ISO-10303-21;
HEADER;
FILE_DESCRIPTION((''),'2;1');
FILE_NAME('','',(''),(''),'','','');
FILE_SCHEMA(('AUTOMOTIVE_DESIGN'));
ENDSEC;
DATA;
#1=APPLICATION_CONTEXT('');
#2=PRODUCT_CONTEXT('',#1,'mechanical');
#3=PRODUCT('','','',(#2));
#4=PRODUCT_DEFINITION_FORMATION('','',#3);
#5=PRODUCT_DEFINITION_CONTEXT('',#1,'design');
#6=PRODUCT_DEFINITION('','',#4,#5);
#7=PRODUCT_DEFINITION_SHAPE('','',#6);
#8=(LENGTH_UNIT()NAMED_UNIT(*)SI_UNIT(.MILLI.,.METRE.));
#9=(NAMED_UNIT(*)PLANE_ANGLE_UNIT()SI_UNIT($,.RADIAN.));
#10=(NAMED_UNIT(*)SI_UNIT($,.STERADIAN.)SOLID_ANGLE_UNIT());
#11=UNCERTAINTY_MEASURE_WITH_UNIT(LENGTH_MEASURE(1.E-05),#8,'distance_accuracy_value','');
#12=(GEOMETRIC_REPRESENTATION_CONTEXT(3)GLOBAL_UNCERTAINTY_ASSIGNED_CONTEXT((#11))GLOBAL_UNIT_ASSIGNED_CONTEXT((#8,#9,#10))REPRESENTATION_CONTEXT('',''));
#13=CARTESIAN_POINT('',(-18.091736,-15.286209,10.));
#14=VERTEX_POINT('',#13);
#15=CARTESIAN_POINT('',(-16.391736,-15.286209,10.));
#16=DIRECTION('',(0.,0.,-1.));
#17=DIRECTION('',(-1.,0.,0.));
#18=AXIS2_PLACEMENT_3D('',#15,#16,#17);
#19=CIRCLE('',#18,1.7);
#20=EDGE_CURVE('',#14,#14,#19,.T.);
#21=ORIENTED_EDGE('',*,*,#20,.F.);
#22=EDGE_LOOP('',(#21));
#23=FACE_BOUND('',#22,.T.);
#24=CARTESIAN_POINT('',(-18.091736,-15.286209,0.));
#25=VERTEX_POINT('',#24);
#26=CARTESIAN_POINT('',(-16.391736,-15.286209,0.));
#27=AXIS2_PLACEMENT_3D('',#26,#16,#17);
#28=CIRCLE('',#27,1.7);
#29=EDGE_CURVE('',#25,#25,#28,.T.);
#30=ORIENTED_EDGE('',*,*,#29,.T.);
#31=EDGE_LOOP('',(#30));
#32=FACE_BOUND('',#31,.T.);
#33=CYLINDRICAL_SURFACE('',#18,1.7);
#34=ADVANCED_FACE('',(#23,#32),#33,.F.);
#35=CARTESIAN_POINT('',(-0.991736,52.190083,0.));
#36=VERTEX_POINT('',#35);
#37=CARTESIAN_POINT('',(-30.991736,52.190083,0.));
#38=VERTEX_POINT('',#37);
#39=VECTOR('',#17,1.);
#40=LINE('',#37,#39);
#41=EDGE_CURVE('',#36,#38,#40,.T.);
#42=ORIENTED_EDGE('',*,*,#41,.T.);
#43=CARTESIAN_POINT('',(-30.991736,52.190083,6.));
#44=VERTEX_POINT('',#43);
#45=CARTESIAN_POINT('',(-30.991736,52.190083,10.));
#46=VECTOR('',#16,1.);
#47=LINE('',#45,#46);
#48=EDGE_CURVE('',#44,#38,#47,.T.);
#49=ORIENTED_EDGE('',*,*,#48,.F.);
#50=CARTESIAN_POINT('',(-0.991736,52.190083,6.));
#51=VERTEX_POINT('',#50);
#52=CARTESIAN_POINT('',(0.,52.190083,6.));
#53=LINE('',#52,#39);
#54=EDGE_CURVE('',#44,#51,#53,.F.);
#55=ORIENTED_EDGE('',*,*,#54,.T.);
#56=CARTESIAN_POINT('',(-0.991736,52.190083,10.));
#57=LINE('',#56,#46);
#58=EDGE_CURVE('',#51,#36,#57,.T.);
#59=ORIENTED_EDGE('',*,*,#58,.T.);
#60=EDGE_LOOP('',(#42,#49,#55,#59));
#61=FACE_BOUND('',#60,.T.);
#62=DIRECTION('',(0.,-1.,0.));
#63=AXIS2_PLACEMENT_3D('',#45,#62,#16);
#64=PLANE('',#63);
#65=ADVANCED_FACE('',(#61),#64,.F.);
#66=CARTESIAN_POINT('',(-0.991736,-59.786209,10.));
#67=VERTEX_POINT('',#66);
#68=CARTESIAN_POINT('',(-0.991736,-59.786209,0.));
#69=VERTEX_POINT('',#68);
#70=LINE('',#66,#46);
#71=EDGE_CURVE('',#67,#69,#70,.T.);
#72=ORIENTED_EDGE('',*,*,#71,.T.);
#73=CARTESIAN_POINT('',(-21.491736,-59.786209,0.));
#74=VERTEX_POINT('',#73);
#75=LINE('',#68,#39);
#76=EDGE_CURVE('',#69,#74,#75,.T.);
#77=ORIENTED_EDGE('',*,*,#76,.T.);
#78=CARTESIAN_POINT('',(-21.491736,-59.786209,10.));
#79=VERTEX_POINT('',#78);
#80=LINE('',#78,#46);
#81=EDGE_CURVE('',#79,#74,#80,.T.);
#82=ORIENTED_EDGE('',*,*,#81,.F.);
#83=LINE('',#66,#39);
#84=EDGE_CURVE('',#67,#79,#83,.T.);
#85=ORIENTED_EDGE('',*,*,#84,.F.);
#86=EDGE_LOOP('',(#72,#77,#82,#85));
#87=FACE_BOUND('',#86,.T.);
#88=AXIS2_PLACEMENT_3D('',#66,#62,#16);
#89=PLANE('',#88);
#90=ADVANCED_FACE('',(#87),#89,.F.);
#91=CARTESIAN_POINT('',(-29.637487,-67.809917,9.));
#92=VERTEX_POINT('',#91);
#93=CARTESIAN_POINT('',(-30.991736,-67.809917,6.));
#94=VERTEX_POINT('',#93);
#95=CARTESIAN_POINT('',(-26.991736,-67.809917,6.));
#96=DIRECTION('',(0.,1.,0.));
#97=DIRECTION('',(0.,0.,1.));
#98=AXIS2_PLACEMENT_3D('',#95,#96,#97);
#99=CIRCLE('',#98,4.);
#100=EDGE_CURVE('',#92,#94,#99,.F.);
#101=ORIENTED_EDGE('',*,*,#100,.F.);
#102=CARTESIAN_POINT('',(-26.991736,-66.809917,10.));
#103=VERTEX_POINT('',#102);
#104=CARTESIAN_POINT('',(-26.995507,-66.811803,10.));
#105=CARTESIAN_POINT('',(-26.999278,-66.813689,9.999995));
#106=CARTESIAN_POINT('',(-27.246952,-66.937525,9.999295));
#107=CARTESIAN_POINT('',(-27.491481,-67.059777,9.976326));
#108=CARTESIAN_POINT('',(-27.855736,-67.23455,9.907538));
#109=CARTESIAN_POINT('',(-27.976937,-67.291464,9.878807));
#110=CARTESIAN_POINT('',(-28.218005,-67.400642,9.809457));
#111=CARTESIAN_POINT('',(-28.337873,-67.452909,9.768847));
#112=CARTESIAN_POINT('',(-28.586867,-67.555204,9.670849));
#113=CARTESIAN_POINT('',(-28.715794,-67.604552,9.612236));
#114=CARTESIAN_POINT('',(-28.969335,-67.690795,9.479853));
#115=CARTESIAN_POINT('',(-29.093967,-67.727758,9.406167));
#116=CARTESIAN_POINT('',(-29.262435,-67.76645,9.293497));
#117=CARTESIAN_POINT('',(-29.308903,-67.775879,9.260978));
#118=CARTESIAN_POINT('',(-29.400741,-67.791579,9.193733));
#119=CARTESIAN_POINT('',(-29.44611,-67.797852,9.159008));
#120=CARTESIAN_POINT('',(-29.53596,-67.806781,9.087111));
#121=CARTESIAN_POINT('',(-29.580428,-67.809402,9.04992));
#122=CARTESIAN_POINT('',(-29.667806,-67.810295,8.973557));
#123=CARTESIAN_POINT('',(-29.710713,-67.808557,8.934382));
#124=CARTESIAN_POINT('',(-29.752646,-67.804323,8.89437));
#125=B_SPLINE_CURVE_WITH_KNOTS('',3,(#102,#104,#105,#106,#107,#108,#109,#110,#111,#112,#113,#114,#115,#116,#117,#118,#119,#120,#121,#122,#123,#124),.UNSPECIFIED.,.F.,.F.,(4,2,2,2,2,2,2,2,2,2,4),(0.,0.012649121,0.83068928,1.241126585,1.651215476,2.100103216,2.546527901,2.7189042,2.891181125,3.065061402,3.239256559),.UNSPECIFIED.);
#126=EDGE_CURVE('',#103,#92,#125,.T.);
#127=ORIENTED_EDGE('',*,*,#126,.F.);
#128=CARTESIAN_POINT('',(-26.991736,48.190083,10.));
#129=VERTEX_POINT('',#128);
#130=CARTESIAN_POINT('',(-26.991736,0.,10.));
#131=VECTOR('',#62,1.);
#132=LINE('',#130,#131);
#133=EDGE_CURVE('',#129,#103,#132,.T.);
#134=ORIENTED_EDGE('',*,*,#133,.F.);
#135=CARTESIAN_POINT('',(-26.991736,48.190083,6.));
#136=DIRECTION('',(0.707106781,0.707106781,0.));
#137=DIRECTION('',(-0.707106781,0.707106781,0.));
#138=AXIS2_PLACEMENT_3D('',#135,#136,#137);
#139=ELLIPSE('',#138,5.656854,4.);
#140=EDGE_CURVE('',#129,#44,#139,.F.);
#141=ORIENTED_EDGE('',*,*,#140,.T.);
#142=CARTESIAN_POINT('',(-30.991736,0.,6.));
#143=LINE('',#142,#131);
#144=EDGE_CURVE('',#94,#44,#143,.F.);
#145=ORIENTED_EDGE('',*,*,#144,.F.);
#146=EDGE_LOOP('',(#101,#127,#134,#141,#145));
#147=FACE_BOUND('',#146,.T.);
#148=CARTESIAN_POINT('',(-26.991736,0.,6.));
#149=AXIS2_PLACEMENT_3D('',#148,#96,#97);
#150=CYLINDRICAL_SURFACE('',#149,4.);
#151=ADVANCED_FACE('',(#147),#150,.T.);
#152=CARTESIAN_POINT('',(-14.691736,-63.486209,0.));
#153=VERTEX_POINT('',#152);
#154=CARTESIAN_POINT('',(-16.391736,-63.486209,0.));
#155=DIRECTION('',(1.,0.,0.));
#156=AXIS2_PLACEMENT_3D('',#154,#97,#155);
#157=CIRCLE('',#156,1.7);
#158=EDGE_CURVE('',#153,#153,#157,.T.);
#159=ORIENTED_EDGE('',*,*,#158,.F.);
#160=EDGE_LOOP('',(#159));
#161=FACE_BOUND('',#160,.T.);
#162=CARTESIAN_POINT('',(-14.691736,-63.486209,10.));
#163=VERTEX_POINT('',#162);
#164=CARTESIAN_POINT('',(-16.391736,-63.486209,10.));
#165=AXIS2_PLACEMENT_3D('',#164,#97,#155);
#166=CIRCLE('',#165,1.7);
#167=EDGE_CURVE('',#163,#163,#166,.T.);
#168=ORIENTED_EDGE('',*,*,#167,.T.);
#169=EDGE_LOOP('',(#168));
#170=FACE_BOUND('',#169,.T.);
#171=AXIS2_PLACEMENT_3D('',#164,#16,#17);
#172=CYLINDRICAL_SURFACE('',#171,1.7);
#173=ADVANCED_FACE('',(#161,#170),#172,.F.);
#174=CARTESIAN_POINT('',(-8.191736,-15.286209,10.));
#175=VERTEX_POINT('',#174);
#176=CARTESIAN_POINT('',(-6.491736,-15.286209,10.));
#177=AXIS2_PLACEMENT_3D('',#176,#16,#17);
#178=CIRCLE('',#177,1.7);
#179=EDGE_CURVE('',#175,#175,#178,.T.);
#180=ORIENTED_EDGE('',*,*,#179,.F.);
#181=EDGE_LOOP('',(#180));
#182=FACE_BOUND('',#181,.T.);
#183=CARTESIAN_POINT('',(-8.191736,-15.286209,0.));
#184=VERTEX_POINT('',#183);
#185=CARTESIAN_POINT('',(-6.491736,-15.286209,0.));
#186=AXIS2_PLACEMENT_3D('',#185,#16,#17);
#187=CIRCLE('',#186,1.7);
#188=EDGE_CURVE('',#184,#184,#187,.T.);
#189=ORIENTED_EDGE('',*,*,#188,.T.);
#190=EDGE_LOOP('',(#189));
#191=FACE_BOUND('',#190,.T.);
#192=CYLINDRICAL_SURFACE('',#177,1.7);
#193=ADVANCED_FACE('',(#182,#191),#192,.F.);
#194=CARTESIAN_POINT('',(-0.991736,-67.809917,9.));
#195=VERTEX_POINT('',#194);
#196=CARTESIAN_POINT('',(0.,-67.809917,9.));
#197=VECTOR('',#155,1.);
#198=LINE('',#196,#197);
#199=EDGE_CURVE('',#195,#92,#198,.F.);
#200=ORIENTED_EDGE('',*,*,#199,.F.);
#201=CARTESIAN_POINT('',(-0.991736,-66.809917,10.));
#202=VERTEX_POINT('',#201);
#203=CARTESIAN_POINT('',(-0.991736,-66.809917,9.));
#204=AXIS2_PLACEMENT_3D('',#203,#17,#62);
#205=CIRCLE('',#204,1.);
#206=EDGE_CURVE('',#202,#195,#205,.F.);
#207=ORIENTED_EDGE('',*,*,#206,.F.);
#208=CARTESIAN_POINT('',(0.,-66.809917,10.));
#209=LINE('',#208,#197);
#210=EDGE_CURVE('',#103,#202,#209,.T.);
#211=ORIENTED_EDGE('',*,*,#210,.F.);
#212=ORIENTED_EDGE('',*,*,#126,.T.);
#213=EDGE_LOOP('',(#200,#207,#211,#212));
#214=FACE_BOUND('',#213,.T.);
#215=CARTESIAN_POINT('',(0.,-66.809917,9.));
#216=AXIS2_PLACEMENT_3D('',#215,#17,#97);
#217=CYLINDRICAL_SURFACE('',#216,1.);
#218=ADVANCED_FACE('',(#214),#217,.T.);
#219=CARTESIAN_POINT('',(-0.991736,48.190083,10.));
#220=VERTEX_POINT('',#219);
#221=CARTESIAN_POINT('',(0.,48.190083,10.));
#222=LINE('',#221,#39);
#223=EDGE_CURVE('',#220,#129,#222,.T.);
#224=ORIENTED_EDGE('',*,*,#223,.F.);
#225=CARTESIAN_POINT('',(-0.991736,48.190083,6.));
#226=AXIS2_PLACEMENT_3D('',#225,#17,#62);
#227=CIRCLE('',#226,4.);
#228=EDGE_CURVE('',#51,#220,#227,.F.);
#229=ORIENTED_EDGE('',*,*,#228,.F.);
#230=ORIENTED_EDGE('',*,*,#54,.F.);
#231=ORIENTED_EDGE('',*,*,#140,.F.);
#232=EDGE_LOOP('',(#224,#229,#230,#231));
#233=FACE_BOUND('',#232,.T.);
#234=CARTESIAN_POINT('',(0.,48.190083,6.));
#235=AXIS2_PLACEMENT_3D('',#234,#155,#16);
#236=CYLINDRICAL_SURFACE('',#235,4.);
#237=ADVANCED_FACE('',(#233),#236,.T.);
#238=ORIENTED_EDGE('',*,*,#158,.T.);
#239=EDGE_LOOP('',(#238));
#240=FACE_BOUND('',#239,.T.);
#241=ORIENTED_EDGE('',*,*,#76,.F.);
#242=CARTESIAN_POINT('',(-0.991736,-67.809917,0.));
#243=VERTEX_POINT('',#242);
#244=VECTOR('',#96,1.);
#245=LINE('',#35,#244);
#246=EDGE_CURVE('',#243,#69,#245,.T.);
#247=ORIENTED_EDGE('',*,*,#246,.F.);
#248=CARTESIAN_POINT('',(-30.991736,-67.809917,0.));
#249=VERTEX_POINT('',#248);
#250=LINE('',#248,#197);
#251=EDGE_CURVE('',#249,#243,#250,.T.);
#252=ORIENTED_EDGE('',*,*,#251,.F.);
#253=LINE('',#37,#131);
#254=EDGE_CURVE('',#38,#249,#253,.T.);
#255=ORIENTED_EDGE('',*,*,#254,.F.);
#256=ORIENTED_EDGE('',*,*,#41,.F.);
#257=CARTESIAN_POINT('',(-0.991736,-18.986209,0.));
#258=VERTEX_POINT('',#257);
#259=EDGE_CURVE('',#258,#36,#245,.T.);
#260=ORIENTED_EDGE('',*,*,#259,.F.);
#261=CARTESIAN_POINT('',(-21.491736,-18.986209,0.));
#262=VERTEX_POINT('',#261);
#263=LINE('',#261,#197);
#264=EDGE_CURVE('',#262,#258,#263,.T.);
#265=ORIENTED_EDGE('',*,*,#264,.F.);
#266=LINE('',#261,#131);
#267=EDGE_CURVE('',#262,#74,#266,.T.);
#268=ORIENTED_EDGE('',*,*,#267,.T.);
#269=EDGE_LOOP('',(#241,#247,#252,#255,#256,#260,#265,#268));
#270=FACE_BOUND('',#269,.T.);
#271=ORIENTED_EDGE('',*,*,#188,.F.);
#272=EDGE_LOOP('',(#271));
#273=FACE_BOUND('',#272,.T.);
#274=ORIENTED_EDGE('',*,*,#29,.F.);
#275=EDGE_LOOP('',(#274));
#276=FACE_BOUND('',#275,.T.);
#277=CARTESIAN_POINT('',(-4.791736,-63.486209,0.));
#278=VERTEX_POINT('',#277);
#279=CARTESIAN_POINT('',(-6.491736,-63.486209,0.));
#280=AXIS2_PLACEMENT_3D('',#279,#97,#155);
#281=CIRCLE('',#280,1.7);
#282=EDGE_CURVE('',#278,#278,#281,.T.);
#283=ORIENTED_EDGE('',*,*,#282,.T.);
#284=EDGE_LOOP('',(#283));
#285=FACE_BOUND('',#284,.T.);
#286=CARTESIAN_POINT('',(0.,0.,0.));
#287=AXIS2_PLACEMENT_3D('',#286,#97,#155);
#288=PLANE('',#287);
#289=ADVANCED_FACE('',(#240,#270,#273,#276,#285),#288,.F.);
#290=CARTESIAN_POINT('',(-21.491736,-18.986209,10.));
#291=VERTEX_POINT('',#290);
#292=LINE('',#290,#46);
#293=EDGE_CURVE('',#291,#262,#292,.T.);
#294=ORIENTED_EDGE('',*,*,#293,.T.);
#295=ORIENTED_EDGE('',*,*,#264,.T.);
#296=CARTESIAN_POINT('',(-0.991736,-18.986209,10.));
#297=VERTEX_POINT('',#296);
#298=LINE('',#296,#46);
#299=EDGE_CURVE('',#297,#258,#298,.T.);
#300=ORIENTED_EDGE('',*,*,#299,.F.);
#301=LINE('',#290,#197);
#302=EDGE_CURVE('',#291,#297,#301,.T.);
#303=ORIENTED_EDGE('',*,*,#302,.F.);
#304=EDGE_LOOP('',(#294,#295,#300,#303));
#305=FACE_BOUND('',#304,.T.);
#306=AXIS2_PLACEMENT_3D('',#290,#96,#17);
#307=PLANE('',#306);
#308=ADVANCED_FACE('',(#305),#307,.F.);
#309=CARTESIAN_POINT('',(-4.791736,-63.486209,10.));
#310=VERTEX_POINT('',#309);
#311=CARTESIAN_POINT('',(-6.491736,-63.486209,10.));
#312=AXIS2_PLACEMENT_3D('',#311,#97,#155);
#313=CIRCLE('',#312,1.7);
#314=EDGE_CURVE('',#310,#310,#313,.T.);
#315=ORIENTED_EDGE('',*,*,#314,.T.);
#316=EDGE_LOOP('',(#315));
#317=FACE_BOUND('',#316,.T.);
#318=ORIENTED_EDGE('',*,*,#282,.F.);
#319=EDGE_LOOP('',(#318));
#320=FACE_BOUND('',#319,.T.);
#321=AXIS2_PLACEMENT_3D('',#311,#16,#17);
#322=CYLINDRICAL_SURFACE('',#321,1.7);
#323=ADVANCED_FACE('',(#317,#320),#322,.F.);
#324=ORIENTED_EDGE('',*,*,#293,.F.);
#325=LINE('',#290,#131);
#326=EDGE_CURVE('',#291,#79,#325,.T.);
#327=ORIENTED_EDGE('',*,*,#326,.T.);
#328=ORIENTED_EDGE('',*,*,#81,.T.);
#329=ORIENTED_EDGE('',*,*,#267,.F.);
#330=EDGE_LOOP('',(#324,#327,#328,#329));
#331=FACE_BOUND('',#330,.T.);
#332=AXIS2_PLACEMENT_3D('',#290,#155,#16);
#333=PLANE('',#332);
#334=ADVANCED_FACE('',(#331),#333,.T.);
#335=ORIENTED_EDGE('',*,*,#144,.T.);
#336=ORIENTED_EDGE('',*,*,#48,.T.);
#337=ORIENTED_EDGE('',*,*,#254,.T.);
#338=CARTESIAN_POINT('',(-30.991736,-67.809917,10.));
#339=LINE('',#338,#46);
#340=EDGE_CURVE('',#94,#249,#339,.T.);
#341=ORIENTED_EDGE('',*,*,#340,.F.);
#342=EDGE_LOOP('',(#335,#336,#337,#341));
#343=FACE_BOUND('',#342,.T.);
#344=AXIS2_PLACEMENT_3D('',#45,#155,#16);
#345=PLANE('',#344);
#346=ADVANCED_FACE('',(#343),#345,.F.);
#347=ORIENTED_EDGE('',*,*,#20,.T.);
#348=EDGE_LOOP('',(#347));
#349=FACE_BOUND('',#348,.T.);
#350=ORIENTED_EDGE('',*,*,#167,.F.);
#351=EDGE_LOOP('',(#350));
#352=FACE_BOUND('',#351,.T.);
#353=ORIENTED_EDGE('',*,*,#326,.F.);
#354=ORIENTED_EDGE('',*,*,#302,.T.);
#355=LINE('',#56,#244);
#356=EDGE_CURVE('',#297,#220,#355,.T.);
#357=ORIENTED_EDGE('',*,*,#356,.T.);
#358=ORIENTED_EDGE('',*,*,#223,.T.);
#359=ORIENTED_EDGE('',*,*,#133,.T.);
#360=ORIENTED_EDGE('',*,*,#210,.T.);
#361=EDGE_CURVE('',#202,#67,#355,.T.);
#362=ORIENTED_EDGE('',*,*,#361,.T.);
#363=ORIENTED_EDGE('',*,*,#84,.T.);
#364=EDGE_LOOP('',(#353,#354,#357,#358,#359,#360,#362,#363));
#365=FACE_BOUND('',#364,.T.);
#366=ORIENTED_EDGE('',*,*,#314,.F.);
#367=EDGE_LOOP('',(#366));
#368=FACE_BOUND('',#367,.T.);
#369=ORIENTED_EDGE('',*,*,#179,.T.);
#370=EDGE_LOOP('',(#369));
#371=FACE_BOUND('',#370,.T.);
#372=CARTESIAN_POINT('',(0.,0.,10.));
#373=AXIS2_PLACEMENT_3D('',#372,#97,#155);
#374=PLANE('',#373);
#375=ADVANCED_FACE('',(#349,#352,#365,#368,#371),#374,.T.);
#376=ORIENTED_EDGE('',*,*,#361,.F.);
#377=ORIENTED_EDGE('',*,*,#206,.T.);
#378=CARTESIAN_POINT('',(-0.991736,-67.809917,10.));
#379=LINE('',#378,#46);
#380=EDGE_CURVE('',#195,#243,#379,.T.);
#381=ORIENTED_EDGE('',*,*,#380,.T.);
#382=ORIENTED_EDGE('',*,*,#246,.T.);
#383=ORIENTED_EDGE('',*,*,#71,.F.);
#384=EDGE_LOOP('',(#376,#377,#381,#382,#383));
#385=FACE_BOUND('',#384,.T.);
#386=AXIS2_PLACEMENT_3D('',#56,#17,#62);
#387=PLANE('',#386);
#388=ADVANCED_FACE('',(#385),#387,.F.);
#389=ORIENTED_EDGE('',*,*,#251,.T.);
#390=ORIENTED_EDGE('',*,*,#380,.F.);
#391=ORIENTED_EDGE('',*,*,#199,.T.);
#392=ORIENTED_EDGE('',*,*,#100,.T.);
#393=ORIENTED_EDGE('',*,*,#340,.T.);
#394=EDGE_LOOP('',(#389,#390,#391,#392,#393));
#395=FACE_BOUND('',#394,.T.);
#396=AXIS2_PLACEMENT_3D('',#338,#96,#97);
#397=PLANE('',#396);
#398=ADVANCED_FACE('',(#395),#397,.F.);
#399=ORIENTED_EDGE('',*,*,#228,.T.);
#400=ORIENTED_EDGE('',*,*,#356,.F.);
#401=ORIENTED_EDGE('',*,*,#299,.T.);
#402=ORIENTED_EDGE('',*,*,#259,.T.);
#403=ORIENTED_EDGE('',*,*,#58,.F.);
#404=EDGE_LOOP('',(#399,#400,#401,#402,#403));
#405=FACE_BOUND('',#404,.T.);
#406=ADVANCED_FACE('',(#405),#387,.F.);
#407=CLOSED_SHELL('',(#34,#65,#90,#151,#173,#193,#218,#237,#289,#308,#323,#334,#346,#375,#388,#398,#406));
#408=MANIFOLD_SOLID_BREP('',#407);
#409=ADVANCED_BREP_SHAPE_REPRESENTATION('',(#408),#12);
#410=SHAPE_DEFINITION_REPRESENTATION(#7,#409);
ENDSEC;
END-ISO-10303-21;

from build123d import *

# Parameters (mm, degrees)
SKETCH2_W           = 30
SKETCH2_H           = 120
BOSS_EXTRUDE1_DEPTH = 10
SKETCH3_R           = 1.7
SKETCH3_W           = 20.5
SKETCH3_H           = 40.8
CUT_EXTRUDE3_DEPTH  = 76.224148804
FILLET1_R           = 1
FILLET2_R           = 4


with BuildPart() as part:
    # Sketch2 → Boss-Extrude1 (new body)
    with BuildSketch(Plane.XY):
        with Locations((-15.991735537, -7.809917355)):
            Rectangle(SKETCH2_W, SKETCH2_H)
    extrude(amount=BOSS_EXTRUDE1_DEPTH)

    # Sketch3 → Cut-Extrude3 (cut, through all)
    with BuildSketch(Plane.XY):
        with Locations((-16.391735537, -63.486209282)):
            Circle(SKETCH3_R)
        with Locations((-6.491735537, -63.486209282)):
            Circle(SKETCH3_R)
        with Locations(Location((-6.491735537, -15.286209282, 0), (0, 0, 180))):
            Circle(SKETCH3_R)
        with Locations(Location((-16.391735537, -15.286209282, 0), (0, 0, 180))):
            Circle(SKETCH3_R)
        with Locations((-11.241735537, -39.386209282)):
            Rectangle(SKETCH3_W, SKETCH3_H)
    extrude(amount=CUT_EXTRUDE3_DEPTH, mode=Mode.SUBTRACT)

    # Fillet1
    fillet1_edges = [part.edges().sort_by_distance(p)[0] for p in [
        (-15.991735537, -67.809917355, 10),
    ]]
    fillet(fillet1_edges, radius=FILLET1_R)

    # Fillet2
    # the kernel refuses this fillet: 4 mm, written as the material it takes off along each edge
    with BuildSketch(Plane(origin=(-40.991735537, 52.190082645, 10), x_dir=(0, -1, 0), z_dir=(1, 0, 0))) as fillet2_piece_1:
        with BuildLine():
            CenterArc((FILLET2_R, FILLET2_R), FILLET2_R, 180, 90)
            Line((0, FILLET2_R), (0, 0))
            Line((0, 0), (FILLET2_R, 0))
        make_face()
    extrude(amount=50, mode=Mode.SUBTRACT)
    with BuildSketch(Plane(origin=(-30.991735537, -76.809917355, 10), x_dir=(0, 0, -1), z_dir=(0, 1, 0))) as fillet2_piece_2:
        with BuildLine():
            CenterArc((FILLET2_R, -FILLET2_R), FILLET2_R, 90, 90)
            Line((0, -FILLET2_R), (0, 0))
            Line((0, 0), (FILLET2_R, 0))
        make_face()
    extrude(amount=139, mode=Mode.SUBTRACT)


solid = part.part
